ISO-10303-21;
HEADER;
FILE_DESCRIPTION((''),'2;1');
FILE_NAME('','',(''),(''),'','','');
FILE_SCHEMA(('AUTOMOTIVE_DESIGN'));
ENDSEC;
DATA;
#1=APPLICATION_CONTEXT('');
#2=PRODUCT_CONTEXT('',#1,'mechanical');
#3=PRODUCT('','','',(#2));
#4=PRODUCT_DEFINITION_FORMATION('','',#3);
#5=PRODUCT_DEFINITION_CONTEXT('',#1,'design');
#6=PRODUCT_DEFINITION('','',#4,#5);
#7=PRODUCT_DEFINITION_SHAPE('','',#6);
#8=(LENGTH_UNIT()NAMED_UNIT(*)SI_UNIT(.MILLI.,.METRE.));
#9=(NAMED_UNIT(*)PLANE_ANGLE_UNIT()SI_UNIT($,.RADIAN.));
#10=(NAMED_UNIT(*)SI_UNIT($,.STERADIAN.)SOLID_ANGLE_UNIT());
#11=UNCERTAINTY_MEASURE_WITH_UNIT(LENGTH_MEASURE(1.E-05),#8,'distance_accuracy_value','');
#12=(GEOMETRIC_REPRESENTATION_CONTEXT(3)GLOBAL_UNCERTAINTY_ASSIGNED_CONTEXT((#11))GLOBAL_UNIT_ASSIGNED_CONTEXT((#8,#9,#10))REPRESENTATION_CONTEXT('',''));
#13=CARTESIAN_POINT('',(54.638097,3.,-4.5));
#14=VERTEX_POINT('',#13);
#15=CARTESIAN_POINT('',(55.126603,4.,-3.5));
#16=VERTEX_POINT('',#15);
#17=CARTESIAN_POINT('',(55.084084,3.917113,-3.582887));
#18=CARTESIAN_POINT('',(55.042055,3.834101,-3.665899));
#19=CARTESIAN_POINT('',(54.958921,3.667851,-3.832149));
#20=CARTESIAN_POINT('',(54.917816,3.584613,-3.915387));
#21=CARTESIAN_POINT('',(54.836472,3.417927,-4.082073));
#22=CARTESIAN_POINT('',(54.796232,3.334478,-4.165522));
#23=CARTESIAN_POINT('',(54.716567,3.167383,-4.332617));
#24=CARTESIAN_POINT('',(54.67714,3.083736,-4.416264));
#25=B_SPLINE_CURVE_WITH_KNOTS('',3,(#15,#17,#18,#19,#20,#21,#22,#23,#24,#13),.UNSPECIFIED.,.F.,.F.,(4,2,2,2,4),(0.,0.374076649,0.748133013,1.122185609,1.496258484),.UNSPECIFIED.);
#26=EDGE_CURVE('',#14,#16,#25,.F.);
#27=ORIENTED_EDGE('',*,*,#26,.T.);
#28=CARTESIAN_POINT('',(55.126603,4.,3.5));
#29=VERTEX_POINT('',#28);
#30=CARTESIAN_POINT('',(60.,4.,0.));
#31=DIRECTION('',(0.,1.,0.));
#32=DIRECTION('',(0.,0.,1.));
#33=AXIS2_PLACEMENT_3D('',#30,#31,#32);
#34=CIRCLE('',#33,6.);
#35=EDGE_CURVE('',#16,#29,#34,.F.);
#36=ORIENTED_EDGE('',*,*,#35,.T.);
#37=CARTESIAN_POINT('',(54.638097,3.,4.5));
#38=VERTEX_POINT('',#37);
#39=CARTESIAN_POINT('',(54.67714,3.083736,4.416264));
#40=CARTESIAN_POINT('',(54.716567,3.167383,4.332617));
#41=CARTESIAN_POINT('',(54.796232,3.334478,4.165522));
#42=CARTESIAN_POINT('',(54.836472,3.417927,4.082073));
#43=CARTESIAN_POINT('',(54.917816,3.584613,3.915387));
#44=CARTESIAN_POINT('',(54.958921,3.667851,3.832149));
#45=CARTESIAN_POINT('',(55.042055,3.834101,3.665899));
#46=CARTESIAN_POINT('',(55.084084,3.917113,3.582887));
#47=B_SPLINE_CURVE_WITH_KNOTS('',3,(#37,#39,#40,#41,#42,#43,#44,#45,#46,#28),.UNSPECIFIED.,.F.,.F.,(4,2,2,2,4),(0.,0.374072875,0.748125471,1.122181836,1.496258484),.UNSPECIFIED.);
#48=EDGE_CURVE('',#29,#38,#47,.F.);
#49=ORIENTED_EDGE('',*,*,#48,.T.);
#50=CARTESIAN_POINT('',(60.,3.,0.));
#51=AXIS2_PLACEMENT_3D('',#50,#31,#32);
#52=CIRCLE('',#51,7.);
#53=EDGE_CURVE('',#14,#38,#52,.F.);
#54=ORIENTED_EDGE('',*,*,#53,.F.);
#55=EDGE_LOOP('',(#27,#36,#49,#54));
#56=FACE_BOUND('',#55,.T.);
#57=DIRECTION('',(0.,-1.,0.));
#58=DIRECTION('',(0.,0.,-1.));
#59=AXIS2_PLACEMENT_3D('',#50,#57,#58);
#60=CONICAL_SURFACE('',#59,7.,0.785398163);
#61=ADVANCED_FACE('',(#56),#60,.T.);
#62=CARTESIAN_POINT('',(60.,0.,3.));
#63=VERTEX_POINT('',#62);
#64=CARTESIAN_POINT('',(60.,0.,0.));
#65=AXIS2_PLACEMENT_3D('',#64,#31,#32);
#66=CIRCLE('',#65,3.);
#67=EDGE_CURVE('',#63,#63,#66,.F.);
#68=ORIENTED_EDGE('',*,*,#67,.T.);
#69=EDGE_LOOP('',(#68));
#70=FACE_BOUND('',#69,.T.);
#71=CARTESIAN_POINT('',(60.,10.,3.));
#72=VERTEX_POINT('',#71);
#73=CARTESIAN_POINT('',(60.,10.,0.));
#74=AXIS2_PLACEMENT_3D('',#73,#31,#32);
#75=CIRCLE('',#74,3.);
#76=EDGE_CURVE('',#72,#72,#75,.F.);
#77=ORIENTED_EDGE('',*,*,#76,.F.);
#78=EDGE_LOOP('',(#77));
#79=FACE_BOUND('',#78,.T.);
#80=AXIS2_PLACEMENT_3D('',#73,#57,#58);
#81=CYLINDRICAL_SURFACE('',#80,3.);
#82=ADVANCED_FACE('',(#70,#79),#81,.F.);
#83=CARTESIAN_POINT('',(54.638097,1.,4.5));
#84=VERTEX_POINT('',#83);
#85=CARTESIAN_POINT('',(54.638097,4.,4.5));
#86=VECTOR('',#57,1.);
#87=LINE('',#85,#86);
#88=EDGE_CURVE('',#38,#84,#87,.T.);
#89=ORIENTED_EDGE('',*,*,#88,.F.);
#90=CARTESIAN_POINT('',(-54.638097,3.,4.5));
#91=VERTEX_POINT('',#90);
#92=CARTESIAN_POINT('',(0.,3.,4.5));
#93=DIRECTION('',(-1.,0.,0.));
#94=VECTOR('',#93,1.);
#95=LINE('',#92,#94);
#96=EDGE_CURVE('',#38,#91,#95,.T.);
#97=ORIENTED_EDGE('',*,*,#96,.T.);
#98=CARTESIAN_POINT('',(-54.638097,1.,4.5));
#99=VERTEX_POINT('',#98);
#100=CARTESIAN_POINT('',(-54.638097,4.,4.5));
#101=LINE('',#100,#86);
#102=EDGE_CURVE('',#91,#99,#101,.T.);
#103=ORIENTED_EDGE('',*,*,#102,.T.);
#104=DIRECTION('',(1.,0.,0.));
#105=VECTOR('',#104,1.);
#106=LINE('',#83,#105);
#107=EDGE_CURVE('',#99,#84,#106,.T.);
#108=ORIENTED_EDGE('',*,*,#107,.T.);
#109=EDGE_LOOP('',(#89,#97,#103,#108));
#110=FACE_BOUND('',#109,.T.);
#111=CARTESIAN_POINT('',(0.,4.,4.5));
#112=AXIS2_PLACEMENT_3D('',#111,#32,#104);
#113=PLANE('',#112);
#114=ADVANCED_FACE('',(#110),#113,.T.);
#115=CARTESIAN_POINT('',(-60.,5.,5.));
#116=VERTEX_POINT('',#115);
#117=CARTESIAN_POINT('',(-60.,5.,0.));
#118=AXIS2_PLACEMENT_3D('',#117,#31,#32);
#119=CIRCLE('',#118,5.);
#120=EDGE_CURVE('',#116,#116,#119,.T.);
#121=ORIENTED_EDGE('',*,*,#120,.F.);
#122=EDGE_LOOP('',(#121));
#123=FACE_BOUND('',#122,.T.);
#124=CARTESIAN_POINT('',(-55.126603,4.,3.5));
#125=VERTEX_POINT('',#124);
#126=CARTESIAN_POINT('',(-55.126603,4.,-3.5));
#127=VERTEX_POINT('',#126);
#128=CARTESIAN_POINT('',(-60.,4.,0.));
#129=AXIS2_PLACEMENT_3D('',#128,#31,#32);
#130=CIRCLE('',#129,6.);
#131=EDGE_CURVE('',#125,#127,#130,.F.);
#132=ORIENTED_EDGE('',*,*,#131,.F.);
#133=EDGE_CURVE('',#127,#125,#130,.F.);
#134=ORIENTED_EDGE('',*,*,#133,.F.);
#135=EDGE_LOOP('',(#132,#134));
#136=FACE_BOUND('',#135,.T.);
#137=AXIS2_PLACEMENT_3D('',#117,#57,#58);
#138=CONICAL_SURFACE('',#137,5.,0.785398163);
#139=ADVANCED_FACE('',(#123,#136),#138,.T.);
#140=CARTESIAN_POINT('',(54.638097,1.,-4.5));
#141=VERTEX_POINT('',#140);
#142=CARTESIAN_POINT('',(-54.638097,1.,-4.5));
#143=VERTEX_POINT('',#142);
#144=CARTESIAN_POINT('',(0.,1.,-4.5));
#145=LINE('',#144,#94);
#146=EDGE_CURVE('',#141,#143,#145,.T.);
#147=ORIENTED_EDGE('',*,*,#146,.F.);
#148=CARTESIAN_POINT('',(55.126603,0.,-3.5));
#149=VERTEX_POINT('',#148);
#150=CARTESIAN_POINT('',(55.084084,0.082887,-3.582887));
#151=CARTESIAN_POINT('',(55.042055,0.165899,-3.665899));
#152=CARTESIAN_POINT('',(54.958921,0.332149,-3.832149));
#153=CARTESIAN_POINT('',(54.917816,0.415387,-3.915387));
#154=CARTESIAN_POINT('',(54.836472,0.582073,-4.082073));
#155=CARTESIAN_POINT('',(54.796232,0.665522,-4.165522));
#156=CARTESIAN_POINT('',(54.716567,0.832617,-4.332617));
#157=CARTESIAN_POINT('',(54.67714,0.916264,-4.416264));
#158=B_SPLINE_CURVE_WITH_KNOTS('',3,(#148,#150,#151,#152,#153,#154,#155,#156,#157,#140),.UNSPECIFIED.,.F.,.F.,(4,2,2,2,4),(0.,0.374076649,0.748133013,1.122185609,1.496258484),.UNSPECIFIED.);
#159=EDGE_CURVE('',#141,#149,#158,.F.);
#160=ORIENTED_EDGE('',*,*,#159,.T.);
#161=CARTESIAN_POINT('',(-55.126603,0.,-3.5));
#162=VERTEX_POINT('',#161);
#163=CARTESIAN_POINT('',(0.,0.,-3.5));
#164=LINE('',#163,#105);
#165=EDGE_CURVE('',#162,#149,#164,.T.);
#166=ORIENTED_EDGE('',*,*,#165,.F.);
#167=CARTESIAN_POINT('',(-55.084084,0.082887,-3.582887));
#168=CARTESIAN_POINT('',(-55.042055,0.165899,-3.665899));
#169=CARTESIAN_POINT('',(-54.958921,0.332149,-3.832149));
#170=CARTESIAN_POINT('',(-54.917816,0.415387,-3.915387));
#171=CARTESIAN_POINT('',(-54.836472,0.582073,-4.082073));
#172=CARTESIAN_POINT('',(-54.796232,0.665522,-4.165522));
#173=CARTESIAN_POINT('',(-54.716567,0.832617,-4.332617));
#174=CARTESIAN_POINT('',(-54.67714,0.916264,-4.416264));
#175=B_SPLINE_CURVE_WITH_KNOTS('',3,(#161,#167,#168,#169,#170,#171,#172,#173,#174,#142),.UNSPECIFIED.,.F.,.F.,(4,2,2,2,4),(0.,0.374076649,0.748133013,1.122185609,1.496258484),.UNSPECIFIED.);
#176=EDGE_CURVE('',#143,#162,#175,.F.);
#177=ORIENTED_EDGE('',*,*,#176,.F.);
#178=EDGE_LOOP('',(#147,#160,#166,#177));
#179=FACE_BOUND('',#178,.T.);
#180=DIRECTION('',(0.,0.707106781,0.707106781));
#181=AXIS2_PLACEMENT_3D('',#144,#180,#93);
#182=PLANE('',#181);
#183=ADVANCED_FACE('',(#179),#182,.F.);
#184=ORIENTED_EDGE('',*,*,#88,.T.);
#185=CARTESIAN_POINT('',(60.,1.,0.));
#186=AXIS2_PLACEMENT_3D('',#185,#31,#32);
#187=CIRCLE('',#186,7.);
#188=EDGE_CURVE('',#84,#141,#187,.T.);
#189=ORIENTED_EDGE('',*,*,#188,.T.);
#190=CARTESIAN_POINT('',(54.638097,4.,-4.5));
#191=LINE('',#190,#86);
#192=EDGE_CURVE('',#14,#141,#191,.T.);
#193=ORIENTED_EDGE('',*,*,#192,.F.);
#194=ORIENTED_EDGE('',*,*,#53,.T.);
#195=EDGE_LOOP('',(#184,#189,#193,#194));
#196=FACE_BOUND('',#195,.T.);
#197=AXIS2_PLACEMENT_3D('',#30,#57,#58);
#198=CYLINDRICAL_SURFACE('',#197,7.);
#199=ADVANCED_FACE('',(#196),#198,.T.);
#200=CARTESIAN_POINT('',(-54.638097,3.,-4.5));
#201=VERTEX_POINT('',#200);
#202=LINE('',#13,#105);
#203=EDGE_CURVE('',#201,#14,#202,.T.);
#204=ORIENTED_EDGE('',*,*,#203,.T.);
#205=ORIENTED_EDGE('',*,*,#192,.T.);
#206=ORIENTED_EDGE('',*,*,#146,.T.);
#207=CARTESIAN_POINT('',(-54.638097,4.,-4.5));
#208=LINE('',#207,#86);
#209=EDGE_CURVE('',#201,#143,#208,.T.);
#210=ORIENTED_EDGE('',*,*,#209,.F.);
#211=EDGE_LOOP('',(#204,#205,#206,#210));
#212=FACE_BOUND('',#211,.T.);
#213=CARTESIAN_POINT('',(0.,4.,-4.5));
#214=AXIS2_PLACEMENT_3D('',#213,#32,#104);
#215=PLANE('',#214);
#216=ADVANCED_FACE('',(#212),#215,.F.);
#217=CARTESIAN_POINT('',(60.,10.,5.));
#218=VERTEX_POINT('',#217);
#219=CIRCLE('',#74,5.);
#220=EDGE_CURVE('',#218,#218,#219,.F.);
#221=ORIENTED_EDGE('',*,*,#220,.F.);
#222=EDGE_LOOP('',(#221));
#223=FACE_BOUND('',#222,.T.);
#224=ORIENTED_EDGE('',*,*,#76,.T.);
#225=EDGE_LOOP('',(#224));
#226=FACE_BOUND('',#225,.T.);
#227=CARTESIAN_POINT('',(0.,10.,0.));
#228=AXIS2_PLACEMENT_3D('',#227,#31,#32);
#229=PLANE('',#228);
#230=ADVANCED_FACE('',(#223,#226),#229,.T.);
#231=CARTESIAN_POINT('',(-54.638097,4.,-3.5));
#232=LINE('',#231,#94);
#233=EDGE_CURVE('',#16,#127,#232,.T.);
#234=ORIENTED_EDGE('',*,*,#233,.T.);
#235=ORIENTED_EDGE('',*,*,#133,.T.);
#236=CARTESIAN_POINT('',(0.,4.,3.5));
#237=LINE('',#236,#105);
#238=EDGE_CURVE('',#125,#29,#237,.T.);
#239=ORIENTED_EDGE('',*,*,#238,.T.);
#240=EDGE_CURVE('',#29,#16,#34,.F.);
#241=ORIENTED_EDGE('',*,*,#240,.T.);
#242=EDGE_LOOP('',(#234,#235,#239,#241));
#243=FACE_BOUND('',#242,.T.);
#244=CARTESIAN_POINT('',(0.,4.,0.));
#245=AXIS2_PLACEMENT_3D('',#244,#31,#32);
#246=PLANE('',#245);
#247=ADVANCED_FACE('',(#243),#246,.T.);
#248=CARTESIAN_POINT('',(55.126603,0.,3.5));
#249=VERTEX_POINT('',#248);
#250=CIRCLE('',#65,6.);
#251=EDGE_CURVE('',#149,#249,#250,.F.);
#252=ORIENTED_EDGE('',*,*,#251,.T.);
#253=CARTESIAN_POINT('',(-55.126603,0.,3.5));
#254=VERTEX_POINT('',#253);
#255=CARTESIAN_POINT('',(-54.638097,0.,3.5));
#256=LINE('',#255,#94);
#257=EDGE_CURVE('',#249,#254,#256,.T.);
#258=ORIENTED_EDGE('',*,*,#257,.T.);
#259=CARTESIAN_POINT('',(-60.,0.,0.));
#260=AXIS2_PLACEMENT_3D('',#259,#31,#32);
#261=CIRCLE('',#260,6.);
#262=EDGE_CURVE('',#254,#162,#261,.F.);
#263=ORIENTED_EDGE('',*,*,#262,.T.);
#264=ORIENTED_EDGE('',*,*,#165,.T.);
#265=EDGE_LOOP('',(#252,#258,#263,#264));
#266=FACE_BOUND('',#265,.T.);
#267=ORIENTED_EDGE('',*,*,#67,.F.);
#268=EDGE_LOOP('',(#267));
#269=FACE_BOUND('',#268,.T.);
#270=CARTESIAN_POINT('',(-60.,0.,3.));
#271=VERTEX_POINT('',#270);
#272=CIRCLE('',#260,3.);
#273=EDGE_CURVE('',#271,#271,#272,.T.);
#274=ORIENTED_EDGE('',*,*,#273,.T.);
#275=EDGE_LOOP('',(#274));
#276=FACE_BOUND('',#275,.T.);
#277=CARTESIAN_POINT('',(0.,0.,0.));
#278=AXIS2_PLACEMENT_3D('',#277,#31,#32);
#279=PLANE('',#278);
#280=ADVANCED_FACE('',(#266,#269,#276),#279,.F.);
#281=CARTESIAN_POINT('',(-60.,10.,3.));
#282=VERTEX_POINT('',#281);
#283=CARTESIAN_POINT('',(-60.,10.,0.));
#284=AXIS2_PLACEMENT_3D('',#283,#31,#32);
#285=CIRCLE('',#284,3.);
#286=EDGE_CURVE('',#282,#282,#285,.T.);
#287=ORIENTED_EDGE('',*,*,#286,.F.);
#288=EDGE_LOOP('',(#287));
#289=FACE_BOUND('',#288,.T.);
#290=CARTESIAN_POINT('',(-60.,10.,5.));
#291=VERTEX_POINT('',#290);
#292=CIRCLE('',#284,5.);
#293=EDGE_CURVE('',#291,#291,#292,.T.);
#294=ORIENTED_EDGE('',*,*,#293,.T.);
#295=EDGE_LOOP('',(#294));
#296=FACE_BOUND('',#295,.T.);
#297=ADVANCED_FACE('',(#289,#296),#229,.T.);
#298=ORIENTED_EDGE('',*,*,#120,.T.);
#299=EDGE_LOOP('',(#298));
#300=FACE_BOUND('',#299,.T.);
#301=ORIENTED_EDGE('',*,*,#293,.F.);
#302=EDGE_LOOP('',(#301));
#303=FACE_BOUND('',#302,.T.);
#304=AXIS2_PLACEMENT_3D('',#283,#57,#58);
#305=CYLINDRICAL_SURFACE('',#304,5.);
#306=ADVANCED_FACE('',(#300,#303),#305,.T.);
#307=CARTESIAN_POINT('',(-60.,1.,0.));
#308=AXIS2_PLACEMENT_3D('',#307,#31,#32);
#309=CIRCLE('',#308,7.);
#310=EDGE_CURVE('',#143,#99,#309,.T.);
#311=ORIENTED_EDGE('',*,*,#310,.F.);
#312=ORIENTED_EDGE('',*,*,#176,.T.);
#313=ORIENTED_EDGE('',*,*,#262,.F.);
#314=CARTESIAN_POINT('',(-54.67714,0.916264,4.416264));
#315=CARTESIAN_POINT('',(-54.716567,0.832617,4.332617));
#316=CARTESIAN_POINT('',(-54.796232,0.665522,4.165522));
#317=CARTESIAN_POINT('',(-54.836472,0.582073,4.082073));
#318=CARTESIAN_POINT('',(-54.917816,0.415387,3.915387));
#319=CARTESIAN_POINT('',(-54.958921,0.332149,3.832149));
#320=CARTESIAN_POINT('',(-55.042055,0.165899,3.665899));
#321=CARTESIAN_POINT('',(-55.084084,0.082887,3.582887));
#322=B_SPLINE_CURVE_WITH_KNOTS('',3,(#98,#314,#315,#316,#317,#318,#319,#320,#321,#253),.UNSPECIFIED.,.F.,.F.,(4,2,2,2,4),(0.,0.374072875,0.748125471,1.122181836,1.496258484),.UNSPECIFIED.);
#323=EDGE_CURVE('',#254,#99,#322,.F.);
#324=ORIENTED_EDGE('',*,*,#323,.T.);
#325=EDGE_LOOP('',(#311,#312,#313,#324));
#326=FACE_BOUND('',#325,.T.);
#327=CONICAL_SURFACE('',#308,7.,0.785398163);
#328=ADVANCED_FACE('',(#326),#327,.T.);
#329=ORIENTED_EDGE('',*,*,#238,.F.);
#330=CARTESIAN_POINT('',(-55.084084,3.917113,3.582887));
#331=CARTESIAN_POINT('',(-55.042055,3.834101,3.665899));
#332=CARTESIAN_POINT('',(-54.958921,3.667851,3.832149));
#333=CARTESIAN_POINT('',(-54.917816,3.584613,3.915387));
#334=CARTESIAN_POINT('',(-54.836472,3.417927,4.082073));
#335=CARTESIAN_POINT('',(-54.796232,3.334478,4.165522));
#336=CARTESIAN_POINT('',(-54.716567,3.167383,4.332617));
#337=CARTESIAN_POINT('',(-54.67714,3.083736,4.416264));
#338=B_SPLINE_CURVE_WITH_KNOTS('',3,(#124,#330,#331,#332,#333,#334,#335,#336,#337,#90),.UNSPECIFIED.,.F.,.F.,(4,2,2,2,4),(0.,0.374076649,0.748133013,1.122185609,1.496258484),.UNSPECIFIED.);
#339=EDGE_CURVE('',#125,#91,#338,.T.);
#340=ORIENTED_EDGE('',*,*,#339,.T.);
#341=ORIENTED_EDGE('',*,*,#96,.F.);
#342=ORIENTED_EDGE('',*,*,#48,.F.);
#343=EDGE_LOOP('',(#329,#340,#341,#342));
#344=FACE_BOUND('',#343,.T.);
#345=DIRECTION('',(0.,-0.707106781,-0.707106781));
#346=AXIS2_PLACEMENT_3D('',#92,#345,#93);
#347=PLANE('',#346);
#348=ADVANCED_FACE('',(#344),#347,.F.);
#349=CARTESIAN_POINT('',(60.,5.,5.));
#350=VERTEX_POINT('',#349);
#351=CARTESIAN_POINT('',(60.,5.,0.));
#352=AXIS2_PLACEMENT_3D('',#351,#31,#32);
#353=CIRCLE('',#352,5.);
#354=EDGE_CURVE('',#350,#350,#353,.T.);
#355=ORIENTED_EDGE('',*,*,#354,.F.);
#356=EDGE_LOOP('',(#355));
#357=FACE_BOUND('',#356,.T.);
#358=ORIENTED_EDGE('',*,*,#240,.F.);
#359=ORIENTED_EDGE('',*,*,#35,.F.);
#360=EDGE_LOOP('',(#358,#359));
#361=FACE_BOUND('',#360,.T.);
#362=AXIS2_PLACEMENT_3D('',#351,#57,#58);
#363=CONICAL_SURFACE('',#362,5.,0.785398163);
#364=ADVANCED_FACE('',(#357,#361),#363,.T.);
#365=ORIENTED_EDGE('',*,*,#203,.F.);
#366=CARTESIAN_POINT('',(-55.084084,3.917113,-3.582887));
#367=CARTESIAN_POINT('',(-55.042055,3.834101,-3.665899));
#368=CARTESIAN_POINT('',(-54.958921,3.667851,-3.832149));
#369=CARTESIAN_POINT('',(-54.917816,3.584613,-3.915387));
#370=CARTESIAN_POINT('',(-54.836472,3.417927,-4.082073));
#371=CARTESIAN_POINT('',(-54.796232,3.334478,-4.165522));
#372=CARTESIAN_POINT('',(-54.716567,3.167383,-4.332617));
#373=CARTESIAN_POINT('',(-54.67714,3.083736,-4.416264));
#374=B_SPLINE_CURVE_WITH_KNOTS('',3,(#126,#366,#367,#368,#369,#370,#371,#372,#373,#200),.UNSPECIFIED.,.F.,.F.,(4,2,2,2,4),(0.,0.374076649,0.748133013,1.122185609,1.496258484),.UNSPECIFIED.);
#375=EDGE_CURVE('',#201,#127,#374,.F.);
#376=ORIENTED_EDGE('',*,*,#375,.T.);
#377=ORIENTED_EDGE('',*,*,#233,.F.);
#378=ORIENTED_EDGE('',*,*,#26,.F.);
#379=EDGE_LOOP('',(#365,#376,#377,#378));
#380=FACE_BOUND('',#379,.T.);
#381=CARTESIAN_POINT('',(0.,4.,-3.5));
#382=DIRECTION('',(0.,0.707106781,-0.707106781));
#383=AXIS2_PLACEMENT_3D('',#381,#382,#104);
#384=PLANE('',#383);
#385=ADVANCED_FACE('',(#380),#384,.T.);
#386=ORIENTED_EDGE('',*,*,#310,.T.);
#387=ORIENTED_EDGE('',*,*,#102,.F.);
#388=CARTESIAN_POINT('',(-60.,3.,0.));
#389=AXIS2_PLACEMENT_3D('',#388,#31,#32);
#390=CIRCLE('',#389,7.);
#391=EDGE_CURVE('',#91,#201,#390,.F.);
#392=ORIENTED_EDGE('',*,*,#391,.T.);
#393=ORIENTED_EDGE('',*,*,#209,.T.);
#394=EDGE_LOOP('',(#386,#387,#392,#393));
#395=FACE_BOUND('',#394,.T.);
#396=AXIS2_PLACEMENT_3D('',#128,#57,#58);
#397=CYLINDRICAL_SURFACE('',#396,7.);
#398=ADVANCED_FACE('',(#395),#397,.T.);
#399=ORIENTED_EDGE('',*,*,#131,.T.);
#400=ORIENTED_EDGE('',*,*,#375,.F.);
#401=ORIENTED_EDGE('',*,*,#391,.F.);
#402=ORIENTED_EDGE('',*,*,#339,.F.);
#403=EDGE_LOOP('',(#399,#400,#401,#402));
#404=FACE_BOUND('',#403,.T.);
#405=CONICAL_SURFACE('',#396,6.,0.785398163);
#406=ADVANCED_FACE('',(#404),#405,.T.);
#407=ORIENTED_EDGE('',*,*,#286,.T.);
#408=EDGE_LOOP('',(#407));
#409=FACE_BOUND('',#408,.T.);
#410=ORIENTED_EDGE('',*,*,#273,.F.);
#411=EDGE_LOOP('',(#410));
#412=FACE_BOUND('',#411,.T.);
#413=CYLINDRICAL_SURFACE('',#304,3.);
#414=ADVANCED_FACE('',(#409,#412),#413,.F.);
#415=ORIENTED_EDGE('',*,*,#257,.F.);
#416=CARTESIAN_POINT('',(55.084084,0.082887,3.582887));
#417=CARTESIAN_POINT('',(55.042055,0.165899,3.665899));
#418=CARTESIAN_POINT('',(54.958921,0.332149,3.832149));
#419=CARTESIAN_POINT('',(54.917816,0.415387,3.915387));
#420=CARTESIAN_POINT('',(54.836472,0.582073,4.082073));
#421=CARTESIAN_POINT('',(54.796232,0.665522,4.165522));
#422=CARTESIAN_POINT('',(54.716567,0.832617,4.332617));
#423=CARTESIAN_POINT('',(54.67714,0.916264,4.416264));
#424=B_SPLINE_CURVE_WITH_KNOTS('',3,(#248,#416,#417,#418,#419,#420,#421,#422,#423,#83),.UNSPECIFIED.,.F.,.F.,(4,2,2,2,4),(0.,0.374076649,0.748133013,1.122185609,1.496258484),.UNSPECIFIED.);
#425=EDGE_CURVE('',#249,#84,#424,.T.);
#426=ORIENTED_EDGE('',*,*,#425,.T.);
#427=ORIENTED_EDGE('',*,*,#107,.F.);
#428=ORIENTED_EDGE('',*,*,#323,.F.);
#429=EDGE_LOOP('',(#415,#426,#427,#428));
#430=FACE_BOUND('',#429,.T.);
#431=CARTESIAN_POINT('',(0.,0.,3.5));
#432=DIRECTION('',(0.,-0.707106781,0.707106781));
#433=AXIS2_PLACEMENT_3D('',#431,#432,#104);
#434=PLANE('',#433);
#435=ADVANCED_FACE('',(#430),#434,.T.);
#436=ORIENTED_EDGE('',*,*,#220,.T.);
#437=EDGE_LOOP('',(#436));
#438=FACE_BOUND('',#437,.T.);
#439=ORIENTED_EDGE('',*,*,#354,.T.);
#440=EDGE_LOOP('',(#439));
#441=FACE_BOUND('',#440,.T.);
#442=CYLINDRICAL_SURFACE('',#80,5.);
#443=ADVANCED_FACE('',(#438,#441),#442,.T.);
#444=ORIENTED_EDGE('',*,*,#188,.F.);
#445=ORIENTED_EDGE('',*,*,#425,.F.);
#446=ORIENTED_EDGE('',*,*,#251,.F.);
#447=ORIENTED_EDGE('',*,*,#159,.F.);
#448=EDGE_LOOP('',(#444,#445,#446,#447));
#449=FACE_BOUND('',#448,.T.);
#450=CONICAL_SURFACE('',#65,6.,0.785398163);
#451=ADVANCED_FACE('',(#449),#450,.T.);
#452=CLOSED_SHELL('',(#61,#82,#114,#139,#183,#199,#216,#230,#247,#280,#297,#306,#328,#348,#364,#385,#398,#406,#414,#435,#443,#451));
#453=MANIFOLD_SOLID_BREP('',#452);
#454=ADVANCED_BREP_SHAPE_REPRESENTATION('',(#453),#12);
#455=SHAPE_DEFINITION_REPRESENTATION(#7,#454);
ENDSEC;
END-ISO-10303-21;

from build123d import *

# Parameters (mm, degrees)
SKETCH1_R           = 5
BOSS_EXTRUDE1_DEPTH = 4
SKETCH1_3_R         = 5
SKETCH1_3_R_2       = 3
BOSS_EXTRUDE2_DEPTH = 10
CHAMFER1_SIZE       = 1
CHAMFER2_SIZE       = 1


with BuildPart() as part:
    # Sketch1 → Boss-Extrude1 (new body)
    with BuildSketch(Plane(origin=(0, 0, 0), x_dir=(1, 0, 0), z_dir=(0, 1, 0))):
        with BuildLine():
            ThreePointArc((54.638097353, 4.5), (67, 0), (54.638097353, -4.5))
            Line((54.638097353, -4.5), (-54.638097353, -4.5))
            ThreePointArc((-54.638097353, -4.5), (-67, 0), (-54.638097353, 4.5))
            Line((-54.638097353, 4.5), (54.638097353, 4.5))
        make_face()
        with Locations(Location((-60, 0, 0), (0, 0, 270))):
            Circle(SKETCH1_R, mode=Mode.SUBTRACT)
        with Locations(Location((60, 0, 0), (0, 0, 270))):
            Circle(SKETCH1_R, mode=Mode.SUBTRACT)
    extrude(amount=BOSS_EXTRUDE1_DEPTH)

    # Sketch1<3> → Boss-Extrude2 (add)
    # profile 1 of 2: a face of its own
    with BuildSketch(Plane(origin=(0, 0, 0), x_dir=(1, 0, 0), z_dir=(0, 1, 0))):
        with Locations(Location((-60, 0, 0), (0, 0, 270))):
            Circle(SKETCH1_3_R)
        with Locations(Location((-60, 0, 0), (0, 0, 270))):
            Circle(SKETCH1_3_R_2, mode=Mode.SUBTRACT)
    # profile 2 of 2: a face of its own
    with BuildSketch(Plane(origin=(0, 0, 0), x_dir=(1, 0, 0), z_dir=(0, 1, 0))):
        with Locations(Location((60, 0, 0), (0, 0, 270))):
            Circle(SKETCH1_3_R)
        with Locations(Location((60, 0, 0), (0, 0, 270))):
            Circle(SKETCH1_3_R_2, mode=Mode.SUBTRACT)
    extrude(amount=BOSS_EXTRUDE2_DEPTH)

    # Chamfer1
    chamfer1_edges = [part.edges().sort_by_distance(p)[0] for p in [
        (-60, 4, -5),
        (60, 4, -5),
    ]]
    chamfer(chamfer1_edges, length=CHAMFER1_SIZE)

    # Chamfer2
    chamfer2_edges = [part.edges().sort_by_distance(p)[0] for p in [
        (0, 4, -4.5),
        (-67, 4, 0),
        (0, 4, 4.5),
        (67, 4, 0),
        (0, 0, 4.5),
        (-67, 0, 0),
        (0, 0, -4.5),
        (67, 0, 0),
    ]]
    chamfer(chamfer2_edges, length=CHAMFER2_SIZE - 0.0001)  # a hair under: the kernel refuses the full size


solid = part.part
